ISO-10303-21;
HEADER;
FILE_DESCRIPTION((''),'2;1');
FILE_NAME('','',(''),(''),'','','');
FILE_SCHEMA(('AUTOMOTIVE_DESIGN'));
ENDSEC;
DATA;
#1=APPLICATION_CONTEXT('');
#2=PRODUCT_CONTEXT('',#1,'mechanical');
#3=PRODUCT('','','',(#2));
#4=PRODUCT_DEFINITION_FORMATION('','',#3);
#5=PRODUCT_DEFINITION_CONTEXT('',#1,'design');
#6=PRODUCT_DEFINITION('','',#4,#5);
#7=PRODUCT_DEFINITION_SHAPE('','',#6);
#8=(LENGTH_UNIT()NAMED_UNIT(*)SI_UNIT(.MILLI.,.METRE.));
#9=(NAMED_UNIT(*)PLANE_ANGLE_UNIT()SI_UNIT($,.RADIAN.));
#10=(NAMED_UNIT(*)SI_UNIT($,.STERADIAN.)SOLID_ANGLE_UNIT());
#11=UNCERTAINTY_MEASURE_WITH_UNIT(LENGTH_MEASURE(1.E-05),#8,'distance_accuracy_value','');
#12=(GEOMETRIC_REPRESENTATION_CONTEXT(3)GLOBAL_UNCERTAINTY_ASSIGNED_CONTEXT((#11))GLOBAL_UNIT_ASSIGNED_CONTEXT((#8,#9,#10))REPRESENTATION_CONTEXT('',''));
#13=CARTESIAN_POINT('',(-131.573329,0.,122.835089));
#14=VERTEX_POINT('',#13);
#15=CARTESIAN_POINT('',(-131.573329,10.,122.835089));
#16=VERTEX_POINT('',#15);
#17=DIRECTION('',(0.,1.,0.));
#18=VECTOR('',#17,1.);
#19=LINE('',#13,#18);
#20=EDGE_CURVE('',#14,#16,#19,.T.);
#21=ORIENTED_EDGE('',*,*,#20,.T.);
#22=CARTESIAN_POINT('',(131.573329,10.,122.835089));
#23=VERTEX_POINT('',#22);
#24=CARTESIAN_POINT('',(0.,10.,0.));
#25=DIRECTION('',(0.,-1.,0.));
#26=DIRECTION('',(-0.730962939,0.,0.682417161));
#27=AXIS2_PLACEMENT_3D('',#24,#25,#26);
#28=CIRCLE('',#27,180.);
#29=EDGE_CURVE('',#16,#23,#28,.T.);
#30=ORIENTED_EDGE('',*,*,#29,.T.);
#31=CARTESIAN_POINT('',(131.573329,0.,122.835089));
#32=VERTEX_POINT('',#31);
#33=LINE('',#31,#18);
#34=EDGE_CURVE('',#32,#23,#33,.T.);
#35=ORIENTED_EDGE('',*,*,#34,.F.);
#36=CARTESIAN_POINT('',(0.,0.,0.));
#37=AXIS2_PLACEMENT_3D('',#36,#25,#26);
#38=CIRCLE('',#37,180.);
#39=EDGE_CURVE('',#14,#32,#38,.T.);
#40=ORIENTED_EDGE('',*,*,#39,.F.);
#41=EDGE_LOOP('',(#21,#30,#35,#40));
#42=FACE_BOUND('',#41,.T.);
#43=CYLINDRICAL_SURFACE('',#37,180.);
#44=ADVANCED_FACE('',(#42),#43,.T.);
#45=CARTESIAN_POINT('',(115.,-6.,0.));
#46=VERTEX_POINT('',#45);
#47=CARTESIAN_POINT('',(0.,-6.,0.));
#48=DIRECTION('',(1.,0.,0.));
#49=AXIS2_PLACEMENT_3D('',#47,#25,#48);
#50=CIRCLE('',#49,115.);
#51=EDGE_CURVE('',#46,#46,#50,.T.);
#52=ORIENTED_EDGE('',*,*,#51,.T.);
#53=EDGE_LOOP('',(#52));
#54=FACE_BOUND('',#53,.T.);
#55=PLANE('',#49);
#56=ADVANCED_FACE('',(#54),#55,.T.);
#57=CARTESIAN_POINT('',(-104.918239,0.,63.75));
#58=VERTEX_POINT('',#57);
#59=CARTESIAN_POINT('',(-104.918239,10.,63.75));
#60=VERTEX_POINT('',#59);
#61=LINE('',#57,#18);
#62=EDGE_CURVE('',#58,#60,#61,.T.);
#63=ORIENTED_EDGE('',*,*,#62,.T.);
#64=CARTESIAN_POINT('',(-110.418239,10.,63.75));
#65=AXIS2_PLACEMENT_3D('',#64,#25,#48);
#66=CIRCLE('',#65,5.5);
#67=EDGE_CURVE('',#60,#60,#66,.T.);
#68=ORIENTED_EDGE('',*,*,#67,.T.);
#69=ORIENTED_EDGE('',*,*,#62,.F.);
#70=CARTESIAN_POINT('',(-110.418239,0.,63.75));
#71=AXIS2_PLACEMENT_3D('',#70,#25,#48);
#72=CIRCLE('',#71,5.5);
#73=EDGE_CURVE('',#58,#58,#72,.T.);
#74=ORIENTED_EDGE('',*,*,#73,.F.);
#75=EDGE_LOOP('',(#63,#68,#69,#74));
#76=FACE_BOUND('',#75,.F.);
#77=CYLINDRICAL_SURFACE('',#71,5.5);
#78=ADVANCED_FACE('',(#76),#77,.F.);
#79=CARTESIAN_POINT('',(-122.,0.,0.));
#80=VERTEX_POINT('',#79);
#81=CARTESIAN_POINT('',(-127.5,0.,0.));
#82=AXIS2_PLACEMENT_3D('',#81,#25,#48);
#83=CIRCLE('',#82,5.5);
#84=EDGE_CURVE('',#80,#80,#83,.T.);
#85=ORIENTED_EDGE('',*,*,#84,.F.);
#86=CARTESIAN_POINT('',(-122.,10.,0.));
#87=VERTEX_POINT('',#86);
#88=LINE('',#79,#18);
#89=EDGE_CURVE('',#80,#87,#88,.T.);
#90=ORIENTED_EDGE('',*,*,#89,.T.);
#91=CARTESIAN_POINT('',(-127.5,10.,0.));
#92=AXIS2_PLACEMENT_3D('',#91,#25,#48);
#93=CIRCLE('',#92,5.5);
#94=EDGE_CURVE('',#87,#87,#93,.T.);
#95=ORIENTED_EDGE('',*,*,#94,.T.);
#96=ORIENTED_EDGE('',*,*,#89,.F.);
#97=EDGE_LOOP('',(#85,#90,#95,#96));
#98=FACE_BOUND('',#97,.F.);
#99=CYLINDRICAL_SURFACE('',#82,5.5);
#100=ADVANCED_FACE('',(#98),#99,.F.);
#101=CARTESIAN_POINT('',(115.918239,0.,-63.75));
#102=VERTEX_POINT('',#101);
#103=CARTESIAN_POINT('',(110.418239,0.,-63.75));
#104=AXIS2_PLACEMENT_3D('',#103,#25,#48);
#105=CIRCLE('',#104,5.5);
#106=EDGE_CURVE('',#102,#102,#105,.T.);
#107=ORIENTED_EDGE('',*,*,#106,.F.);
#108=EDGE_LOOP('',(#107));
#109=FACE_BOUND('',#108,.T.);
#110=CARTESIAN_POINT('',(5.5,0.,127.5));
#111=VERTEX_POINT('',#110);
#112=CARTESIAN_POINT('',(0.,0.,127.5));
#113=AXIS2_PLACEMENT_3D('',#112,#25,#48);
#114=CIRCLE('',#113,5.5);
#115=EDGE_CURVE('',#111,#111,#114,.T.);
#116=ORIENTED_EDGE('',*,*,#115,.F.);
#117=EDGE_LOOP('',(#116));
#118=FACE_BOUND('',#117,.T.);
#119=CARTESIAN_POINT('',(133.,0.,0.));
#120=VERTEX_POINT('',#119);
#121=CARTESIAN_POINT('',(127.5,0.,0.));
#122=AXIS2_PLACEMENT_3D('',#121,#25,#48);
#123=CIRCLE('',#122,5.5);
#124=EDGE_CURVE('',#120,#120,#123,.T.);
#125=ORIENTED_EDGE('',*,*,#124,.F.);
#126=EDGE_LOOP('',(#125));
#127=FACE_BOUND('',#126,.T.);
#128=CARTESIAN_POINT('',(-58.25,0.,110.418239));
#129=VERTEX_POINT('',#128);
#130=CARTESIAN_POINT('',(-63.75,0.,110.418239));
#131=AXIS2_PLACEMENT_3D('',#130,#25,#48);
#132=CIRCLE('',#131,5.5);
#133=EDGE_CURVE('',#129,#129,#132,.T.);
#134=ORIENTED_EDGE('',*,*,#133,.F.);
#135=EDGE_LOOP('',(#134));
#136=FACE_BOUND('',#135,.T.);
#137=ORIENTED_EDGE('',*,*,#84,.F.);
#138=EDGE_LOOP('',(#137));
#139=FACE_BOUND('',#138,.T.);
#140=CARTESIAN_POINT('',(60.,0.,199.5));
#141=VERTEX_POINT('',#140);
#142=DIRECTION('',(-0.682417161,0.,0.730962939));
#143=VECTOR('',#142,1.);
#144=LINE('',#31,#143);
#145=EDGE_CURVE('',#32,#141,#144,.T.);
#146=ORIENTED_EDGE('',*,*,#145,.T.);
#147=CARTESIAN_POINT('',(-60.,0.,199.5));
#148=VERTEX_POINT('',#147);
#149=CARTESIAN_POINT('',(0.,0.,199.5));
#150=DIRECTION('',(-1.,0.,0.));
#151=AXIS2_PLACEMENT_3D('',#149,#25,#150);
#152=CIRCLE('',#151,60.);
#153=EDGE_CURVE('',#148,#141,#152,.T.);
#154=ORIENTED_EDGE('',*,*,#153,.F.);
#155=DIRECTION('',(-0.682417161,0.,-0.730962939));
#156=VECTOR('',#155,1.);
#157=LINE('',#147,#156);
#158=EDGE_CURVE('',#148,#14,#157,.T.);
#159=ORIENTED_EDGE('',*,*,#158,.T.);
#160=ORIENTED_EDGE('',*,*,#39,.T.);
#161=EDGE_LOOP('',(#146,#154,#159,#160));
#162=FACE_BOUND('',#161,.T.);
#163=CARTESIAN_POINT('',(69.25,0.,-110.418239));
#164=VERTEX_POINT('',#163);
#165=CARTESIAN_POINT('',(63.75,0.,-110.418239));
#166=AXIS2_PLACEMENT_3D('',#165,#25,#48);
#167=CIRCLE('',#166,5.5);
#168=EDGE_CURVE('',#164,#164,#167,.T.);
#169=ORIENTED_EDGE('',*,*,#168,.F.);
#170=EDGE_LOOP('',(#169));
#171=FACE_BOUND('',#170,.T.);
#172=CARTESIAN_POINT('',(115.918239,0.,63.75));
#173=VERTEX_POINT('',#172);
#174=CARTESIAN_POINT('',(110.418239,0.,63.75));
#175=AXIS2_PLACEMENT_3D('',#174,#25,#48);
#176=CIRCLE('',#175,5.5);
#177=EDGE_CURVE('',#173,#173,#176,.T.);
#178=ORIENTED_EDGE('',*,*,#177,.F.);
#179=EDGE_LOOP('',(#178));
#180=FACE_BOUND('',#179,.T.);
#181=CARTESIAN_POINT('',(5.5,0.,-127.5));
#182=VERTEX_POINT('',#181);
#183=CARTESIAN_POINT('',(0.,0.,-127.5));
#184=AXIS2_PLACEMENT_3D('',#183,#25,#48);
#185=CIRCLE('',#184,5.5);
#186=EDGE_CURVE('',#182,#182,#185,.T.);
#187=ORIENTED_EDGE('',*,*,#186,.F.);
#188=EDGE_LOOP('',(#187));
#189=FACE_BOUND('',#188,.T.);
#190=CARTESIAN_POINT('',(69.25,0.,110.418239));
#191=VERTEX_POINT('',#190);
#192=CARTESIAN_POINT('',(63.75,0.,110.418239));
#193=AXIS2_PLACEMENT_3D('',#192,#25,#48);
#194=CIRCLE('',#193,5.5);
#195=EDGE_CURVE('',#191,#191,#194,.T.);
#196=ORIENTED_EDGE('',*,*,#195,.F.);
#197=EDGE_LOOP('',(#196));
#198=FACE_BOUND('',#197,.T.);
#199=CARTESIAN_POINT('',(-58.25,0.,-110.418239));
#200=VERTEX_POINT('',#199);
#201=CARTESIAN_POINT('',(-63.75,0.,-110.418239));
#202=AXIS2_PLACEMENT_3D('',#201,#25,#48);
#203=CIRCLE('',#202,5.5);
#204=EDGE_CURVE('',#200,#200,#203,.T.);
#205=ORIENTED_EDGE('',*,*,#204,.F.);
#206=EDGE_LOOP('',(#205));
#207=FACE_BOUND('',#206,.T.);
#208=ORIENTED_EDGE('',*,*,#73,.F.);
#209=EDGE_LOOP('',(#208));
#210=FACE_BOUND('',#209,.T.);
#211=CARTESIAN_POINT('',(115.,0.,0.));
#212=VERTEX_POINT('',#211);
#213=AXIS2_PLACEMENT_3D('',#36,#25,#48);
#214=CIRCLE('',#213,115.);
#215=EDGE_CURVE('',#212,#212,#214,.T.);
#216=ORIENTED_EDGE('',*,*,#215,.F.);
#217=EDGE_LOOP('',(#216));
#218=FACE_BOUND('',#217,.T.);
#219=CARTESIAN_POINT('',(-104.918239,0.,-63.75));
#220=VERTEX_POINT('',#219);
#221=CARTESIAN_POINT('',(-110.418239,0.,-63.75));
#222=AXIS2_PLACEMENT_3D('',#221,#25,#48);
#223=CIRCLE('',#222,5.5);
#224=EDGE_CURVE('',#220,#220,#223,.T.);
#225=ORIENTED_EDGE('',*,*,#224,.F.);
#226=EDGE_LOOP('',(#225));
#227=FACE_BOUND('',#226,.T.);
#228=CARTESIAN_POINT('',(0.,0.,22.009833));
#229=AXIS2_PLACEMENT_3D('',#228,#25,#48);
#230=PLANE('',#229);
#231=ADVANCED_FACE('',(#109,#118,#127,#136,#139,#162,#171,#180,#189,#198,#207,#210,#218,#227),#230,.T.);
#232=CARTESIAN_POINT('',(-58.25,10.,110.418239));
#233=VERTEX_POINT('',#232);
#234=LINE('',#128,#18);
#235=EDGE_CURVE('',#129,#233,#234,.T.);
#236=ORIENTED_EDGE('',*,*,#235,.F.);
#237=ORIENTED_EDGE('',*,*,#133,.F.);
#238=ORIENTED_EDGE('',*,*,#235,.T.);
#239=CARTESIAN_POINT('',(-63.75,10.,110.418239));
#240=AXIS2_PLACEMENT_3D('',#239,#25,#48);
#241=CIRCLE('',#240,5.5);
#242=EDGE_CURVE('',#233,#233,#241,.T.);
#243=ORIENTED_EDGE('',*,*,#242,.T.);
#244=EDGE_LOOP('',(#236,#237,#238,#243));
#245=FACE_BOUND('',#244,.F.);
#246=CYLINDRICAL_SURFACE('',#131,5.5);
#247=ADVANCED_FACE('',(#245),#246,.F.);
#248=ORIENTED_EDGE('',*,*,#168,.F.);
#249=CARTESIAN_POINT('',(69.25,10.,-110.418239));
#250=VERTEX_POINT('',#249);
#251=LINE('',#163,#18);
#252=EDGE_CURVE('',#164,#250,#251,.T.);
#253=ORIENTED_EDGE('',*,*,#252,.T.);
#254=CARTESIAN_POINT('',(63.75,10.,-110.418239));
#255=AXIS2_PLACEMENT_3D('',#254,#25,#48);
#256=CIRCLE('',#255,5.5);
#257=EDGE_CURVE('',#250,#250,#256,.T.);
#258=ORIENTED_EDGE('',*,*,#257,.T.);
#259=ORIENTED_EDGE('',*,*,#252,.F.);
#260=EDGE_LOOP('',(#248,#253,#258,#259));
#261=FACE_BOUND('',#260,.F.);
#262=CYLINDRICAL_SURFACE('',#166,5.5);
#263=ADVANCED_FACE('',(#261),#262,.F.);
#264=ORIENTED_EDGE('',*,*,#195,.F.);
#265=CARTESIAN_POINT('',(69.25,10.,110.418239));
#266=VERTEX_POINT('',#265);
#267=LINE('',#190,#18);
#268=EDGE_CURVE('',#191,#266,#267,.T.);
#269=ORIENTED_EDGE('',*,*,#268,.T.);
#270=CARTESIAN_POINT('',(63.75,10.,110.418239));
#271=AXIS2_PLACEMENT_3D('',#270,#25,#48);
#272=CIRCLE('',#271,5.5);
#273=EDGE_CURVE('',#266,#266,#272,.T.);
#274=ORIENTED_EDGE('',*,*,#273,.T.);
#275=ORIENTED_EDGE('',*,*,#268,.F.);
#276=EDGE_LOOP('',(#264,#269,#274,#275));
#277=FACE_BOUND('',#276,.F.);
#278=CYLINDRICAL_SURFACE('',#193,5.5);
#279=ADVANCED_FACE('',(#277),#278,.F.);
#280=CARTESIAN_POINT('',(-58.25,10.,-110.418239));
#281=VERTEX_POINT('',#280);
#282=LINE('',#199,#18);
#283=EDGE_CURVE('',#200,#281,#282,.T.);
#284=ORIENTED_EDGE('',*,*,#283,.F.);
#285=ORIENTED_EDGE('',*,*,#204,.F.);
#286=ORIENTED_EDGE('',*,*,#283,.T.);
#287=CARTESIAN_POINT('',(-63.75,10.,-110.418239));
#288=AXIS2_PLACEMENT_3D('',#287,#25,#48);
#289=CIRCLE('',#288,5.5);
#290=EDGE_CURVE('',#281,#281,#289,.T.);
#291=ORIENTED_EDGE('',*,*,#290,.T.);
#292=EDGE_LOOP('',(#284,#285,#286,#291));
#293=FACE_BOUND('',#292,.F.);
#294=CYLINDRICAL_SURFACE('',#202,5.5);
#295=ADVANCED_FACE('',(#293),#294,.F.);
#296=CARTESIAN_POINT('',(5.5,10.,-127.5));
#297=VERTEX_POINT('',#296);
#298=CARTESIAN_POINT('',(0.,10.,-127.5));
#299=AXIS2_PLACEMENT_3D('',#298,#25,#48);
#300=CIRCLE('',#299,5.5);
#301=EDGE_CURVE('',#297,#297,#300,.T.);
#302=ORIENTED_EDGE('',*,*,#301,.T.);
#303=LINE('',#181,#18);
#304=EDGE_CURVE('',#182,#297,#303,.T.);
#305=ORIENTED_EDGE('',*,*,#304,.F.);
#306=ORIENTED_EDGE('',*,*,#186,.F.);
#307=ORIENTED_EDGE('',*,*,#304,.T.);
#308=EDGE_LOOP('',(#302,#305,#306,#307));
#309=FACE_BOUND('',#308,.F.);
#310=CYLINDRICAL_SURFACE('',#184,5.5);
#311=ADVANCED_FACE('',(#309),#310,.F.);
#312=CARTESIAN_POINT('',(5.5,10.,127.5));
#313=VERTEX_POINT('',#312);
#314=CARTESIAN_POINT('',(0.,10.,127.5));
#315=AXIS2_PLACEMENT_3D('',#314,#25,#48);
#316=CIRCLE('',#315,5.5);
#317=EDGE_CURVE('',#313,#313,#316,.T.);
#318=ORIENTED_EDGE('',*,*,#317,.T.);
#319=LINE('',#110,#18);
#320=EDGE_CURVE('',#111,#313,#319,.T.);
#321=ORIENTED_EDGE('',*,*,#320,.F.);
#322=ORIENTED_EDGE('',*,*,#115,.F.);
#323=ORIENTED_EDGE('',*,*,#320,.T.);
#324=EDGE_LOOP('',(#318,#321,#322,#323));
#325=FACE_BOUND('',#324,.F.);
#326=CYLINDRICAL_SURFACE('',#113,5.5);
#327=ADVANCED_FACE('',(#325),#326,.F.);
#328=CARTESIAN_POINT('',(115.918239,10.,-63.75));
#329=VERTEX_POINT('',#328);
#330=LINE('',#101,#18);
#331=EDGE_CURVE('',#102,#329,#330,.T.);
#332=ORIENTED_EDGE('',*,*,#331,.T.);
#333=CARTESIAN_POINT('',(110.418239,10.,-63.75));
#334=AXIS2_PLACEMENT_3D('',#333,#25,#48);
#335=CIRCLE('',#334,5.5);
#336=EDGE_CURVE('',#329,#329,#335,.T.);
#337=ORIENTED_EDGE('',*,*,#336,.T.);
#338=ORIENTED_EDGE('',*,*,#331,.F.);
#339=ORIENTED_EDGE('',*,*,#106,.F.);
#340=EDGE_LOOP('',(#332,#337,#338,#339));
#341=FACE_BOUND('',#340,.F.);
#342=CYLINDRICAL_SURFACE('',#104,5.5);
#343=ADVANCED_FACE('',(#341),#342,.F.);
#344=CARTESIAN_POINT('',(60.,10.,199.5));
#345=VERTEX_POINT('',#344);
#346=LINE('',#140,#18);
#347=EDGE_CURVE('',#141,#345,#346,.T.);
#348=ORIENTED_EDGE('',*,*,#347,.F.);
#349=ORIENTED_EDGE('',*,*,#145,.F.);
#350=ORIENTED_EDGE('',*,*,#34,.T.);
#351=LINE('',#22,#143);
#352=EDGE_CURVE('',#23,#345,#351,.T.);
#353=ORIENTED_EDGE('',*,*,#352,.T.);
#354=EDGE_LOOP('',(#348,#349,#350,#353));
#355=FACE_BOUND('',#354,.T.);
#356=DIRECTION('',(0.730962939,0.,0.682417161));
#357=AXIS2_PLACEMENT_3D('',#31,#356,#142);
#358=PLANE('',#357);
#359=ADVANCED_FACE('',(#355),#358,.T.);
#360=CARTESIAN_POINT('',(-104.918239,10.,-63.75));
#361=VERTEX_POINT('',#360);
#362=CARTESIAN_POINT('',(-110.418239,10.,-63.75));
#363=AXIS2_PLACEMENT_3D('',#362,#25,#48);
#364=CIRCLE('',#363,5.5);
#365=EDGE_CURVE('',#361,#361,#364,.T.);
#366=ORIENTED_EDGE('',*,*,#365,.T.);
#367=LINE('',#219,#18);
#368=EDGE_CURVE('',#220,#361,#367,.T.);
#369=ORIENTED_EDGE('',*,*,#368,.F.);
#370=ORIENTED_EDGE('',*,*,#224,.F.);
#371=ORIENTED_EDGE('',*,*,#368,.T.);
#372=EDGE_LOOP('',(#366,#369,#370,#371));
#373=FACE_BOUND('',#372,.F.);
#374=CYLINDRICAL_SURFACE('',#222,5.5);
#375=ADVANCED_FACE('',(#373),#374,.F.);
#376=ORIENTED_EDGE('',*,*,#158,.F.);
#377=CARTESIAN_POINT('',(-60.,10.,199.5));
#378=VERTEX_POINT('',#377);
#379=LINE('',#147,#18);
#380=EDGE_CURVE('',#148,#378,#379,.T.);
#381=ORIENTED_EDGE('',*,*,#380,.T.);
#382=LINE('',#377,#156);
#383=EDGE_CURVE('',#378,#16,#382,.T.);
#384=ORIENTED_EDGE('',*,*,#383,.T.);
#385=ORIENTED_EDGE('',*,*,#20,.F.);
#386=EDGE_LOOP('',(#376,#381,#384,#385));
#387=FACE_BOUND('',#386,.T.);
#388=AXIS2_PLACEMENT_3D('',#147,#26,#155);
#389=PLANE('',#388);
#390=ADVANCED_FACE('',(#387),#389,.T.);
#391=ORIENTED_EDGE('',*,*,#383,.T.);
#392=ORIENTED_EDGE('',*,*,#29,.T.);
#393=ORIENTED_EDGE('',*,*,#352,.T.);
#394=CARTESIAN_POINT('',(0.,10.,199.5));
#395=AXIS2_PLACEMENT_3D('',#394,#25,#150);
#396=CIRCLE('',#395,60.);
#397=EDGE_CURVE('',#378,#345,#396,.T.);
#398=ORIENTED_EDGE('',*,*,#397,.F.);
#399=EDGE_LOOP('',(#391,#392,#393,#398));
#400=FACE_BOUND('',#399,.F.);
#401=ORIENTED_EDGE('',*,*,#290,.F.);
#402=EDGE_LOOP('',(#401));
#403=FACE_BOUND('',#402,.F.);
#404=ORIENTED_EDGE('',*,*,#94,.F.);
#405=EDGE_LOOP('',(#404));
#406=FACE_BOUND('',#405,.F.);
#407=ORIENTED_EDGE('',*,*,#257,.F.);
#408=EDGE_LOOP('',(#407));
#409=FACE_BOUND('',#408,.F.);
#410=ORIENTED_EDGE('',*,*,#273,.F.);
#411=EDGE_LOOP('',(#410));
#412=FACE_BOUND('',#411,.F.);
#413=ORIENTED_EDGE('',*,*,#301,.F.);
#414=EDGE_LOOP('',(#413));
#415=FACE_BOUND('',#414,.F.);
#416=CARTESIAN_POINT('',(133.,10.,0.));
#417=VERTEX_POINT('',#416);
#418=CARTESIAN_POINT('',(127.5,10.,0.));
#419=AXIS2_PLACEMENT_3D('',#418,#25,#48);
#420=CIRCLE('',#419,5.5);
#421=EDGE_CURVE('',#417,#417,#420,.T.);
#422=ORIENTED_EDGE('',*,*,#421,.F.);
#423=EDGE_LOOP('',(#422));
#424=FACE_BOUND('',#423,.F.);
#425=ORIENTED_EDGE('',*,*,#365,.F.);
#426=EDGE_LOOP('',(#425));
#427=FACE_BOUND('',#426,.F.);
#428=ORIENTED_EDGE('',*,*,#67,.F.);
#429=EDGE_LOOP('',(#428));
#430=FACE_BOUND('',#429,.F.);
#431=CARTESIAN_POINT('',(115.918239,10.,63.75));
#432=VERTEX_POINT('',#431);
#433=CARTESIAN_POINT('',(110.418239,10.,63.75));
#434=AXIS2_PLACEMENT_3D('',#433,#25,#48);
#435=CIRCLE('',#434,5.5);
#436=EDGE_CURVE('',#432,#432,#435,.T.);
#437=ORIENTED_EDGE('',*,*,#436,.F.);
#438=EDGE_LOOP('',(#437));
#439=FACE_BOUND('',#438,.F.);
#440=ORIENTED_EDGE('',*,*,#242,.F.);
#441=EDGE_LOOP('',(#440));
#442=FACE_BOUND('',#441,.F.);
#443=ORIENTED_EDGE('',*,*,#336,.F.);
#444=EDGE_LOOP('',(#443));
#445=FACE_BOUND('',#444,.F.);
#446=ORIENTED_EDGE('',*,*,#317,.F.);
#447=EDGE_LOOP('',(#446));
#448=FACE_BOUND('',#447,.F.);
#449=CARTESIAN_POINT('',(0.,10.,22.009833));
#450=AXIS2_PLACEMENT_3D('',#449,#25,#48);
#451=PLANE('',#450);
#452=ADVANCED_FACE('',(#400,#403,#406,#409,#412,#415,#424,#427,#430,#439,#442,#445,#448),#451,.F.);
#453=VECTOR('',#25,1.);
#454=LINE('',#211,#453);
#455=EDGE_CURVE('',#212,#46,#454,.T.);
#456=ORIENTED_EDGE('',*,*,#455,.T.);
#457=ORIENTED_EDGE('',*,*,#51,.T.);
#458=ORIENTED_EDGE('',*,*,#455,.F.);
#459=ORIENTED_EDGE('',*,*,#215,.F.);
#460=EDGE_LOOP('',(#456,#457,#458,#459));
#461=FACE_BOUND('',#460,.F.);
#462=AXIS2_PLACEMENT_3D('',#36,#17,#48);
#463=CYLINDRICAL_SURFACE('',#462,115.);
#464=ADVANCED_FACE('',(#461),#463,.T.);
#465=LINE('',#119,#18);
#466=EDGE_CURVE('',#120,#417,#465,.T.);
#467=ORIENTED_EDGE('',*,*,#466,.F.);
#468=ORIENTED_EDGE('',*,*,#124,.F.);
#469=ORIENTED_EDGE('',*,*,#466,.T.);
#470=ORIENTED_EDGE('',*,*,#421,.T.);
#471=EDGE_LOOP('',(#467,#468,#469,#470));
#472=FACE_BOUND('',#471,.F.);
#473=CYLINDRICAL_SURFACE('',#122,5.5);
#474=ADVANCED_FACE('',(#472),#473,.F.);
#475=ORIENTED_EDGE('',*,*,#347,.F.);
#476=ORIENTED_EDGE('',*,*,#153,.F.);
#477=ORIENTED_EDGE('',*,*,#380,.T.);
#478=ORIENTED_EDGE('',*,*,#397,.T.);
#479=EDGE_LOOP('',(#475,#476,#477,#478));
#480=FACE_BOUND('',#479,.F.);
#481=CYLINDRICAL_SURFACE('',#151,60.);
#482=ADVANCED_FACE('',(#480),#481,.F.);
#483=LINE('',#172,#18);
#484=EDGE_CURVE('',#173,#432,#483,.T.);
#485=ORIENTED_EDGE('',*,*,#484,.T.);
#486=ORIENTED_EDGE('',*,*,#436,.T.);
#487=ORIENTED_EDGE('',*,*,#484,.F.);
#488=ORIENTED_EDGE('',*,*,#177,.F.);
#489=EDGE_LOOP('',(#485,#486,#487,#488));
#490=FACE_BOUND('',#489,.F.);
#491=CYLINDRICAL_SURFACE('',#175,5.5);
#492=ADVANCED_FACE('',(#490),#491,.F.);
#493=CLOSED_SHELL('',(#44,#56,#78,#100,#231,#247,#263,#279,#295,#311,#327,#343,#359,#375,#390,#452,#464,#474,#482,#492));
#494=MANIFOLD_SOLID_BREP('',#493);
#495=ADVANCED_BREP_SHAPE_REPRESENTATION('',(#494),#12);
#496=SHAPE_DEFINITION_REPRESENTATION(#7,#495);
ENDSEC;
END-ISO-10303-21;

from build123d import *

# Parameters (mm, degrees)
F1_DEPTH = 10
F3_DEPTH = 10
F4_R     = 115
F5_DEPTH = 6
F6_R     = 5.5
F7_DEPTH = 10


with BuildPart() as f1:
    # F0 (on Front) → F1 (new body)
    with BuildSketch(Plane.XZ):
        with BuildLine():
            Line((-60, 199.5), (-131.5733290036, 122.8350890215))
            ThreePointArc((-131.5733290036, 122.8350890215), (0, -180), (131.5733290036, 122.8350890215))
            Line((131.5733290036, 122.8350890215), (60, 199.5))
            Line((60, 199.5), (0, 199.5))
            Line((0, 199.5), (-60, 199.5))
        make_face()
    extrude(amount=-F1_DEPTH)

    # F2 (on face) → F3 (cut, through all)
    with BuildSketch(Plane.XZ):
        with BuildLine():
            Line((-60, 199.5), (60, 199.5))
            ThreePointArc((60, 199.5), (0, 259.5), (-60, 199.5))
        make_face()
        with BuildLine():
            ThreePointArc((-60, 199.5), (0, 139.5), (60, 199.5))
            Line((60, 199.5), (-60, 199.5))
        make_face()
    extrude(amount=-F3_DEPTH, mode=Mode.SUBTRACT)

    # F4 (on face) → F5 (join)
    with BuildSketch(Plane.XZ):
        Circle(F4_R)
    extrude(amount=F5_DEPTH)

    # F6 (on face) → F7 (cut, through all)
    with BuildSketch(Plane.XZ):
        with Locations((-63.75, 110.4182389825)):
            Circle(F6_R)
        with Locations((0, 127.5)):
            Circle(F6_R)
        with Locations((63.75, 110.4182389825)):
            Circle(F6_R)
        with Locations((110.4182389825, 63.75)):
            Circle(F6_R)
        with Locations((127.5, 0)):
            Circle(F6_R)
        with Locations((110.4182389825, -63.75)):
            Circle(F6_R)
        with Locations((63.75, -110.4182389825)):
            Circle(F6_R)
        with Locations((0, -127.5)):
            Circle(F6_R)
        with Locations((-63.75, -110.4182389825)):
            Circle(F6_R)
        with Locations((-110.4182389825, -63.75)):
            Circle(F6_R)
        with Locations((-127.5, 0)):
            Circle(F6_R)
        with Locations((-110.4182389825, 63.75)):
            Circle(F6_R)
    extrude(amount=-F7_DEPTH, mode=Mode.SUBTRACT)


solid = f1.part
